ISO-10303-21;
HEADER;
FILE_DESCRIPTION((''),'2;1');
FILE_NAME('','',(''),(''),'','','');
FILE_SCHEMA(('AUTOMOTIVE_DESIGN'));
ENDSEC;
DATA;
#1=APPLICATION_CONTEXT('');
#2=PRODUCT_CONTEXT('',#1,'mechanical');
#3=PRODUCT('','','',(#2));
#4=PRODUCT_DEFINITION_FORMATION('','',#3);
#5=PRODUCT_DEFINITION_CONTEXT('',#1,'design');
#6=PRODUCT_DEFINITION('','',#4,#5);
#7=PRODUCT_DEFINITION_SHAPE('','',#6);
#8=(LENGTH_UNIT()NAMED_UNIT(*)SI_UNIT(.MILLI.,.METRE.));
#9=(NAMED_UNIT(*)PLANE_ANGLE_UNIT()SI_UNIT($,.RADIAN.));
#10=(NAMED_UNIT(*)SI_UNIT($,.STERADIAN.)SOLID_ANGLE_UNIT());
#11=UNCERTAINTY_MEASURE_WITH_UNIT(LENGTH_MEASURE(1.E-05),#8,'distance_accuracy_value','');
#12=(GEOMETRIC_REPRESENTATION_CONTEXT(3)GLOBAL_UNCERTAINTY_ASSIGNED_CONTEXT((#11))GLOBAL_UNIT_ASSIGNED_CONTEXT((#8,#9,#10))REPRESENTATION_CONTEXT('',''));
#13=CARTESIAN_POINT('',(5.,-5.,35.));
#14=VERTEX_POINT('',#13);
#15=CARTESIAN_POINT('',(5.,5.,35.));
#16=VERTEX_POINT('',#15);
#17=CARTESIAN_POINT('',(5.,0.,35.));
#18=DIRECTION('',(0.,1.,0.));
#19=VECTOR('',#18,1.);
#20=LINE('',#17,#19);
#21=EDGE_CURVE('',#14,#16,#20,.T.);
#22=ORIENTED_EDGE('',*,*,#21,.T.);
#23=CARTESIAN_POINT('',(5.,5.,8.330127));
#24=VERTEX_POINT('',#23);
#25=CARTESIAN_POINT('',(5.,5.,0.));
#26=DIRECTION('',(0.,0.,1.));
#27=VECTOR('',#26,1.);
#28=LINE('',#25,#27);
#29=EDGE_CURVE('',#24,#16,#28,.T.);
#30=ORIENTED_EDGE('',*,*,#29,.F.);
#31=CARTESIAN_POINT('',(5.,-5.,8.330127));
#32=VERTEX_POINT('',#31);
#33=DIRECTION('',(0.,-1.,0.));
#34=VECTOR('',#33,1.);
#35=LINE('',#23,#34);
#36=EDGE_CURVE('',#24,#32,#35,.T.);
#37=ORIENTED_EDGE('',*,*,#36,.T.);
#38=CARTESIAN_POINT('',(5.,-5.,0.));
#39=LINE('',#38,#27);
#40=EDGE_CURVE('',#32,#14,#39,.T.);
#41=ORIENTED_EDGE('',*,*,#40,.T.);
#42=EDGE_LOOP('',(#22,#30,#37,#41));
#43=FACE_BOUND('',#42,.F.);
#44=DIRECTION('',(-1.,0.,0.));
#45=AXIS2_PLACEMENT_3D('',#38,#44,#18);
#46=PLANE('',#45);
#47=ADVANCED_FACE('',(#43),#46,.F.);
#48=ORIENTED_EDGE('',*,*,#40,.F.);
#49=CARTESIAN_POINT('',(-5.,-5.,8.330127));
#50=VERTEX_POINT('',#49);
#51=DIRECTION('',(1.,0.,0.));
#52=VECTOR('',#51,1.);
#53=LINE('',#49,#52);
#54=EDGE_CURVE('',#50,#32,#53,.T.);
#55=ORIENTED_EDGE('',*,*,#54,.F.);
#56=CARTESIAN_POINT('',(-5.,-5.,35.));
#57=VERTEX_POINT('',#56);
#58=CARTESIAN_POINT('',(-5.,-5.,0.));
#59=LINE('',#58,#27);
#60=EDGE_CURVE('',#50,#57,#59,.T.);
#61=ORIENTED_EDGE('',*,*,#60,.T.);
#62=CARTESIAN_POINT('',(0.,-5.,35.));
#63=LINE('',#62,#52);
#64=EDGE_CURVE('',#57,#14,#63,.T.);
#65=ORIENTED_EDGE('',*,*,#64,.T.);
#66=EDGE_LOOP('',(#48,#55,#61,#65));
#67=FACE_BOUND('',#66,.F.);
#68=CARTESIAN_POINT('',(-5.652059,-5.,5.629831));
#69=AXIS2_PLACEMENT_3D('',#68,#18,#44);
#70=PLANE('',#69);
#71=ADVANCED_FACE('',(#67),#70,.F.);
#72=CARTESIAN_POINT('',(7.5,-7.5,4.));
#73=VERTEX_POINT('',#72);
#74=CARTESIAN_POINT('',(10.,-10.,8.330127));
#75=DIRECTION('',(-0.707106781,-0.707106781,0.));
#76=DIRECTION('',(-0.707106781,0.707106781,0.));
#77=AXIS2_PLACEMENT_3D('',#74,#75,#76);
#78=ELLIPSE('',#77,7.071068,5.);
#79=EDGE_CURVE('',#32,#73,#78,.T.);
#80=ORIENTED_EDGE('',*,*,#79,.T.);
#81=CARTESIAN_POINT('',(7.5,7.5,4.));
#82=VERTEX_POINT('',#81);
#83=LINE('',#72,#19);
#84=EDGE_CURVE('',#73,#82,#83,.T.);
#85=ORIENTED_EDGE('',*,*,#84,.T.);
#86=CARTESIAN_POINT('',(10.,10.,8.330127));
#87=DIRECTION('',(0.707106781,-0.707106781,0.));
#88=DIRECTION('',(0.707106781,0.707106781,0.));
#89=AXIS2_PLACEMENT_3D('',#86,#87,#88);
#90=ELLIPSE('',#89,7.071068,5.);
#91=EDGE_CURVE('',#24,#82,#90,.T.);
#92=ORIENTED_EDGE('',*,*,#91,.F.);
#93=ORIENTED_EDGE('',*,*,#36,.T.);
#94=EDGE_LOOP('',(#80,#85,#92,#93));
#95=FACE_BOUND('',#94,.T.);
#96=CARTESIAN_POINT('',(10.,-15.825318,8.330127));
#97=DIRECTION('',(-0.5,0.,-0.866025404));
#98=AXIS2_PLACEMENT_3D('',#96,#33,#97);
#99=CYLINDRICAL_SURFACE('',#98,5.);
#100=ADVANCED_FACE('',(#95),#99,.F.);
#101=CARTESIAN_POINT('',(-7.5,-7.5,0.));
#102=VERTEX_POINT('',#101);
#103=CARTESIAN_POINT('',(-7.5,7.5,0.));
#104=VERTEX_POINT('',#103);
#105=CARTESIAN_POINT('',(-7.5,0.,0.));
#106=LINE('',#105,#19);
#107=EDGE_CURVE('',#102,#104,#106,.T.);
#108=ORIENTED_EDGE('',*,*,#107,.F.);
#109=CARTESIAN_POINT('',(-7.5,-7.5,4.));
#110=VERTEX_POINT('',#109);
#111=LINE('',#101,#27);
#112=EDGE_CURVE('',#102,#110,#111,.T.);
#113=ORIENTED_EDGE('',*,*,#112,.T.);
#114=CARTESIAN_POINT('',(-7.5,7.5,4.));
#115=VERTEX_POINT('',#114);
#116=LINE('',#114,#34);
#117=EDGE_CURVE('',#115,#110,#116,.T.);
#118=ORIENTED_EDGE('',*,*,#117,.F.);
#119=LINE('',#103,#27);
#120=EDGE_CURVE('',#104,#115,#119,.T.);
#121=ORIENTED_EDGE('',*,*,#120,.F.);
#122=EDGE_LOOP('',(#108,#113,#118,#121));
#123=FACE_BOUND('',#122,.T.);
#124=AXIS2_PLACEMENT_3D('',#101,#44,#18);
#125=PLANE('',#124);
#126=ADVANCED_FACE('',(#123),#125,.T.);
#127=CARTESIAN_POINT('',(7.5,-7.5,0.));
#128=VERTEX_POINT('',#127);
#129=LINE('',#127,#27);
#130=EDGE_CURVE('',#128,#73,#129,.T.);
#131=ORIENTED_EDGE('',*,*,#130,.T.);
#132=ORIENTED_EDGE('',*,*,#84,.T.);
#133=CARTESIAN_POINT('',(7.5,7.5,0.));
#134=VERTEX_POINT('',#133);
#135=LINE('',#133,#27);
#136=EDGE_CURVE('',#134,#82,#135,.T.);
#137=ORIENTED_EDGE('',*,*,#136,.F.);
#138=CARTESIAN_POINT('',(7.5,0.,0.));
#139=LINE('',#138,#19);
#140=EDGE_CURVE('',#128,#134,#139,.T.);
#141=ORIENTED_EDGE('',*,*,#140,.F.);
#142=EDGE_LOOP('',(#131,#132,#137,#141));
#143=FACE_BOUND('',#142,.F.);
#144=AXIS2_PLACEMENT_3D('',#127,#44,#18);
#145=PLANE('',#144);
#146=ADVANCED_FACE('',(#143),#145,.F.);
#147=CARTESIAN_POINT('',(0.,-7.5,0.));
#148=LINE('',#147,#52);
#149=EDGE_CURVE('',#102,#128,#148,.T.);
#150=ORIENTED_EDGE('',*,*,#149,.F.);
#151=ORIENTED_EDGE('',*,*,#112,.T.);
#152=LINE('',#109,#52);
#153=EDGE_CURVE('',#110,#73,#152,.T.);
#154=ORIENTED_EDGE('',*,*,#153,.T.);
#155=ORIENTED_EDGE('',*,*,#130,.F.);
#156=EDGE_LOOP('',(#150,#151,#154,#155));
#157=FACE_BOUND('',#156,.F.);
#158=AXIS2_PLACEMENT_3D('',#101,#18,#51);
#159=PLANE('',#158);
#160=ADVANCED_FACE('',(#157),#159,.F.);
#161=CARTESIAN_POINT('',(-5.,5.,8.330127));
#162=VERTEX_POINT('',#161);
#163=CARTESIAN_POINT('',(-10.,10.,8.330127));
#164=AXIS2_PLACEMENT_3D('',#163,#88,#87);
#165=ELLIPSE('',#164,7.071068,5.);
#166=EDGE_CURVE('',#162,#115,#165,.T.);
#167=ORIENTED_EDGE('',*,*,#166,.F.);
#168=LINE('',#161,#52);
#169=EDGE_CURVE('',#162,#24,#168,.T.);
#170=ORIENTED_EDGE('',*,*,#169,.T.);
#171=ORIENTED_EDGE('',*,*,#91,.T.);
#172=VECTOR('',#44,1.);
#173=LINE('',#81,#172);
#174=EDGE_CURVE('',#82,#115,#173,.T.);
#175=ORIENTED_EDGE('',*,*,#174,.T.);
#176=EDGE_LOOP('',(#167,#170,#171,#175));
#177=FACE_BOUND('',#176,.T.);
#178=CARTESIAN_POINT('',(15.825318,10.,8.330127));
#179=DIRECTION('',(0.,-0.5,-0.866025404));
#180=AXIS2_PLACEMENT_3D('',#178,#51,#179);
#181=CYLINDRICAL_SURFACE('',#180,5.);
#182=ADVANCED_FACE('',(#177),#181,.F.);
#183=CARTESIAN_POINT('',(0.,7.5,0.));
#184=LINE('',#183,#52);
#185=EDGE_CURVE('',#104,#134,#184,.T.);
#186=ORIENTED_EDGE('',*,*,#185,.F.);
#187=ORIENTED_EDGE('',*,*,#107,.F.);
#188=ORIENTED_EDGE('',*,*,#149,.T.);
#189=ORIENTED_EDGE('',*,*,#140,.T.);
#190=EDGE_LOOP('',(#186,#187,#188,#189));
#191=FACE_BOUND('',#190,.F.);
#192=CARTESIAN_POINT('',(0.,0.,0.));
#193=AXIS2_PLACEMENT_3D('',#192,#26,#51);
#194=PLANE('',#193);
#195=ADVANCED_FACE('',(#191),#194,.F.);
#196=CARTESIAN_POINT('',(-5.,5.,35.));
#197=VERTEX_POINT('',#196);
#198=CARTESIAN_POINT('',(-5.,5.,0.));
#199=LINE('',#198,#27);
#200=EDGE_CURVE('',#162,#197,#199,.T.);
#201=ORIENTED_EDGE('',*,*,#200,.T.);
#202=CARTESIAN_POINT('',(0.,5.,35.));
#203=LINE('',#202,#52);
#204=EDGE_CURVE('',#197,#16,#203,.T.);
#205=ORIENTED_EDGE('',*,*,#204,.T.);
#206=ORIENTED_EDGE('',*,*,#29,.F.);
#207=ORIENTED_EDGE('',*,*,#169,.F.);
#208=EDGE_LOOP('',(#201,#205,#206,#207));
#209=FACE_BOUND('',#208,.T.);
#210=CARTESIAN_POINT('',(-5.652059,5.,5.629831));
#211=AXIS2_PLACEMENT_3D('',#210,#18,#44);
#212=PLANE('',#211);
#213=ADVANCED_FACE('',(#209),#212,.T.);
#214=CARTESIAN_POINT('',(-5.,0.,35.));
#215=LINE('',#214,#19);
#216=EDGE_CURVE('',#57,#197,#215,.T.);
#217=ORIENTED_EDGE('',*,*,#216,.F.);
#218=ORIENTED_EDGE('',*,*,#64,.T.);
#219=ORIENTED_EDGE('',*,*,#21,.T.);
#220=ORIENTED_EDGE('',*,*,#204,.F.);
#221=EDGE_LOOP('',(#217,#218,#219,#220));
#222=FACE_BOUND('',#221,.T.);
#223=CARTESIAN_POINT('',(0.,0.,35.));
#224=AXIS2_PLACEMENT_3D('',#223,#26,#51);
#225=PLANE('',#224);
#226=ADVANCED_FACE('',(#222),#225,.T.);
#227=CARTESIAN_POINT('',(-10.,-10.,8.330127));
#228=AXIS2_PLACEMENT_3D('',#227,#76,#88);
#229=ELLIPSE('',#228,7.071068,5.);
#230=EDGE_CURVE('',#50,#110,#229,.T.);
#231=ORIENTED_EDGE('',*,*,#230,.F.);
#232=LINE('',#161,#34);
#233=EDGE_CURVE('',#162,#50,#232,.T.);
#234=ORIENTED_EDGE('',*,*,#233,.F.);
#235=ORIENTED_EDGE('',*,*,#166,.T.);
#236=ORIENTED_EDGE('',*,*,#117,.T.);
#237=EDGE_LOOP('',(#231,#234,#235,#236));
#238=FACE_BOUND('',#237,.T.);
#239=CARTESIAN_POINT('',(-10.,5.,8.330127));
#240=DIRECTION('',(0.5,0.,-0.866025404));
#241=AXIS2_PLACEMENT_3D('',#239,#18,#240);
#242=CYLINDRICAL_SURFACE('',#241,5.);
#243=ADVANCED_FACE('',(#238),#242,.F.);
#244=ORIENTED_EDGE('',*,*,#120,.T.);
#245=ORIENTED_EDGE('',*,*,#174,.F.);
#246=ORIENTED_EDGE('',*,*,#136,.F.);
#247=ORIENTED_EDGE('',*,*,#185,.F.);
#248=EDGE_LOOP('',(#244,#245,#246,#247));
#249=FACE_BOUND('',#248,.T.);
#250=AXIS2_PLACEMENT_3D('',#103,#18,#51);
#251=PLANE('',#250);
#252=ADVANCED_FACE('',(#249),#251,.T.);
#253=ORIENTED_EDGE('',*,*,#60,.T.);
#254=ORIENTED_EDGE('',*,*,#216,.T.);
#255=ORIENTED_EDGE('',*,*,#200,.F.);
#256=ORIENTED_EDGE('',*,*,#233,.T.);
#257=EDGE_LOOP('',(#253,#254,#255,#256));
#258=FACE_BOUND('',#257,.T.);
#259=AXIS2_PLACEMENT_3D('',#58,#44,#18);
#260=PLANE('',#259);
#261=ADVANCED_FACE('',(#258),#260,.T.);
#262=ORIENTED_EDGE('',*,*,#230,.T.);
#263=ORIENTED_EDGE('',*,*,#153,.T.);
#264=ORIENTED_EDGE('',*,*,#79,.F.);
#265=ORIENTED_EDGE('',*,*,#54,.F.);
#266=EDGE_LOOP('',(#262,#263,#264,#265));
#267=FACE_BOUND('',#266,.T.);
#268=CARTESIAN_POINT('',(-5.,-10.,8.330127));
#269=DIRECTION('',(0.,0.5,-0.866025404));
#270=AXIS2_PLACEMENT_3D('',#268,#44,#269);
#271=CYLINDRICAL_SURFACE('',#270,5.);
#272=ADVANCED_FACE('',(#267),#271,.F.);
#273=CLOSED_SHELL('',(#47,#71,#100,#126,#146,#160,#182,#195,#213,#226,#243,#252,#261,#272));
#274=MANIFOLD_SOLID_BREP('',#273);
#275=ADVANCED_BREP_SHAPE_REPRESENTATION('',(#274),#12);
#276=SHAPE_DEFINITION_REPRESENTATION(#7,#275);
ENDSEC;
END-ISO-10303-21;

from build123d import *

# Parameters (mm, degrees)
F0_W         = 10
F0_H         = 10
F1_DEPTH     = 35
F2_W         = 15
F2_H         = 15
F3_DEPTH     = 4
F4_T1_DEPTH  = 10
F4_T3_DEPTH  = 10
F4_T9_DEPTH  = 20.8253175473
F4_T14_DEPTH = 20.8253175473
F4_T22_DEPTH = 20.8253175473
F4_T27_DEPTH = 20.8253175473
F4_T35_DEPTH = 20.8253175473
F4_T40_DEPTH = 20.8253175473
F4_T48_DEPTH = 20.8253175473
F4_T53_DEPTH = 20.8253175473


# Not quite as in the source:
# - a fillet or chamfer that OpenCascade refuses, or shapes differently, is made with other operations: its cross-section is extruded or revolved along the edge and cut away or added


with BuildPart() as f1:
    # F0 (on Top) → F1 (new body)
    with BuildSketch(Plane.XY):
        Rectangle(F0_W, F0_H)
    extrude(amount=F1_DEPTH)

    # F2 (on Top) → F3 (join)
    with BuildSketch(Plane.XY):
        Rectangle(F2_W, F2_H)
    extrude(amount=F3_DEPTH)

    # F4: fillet of radius 5 on 4 edges, made by hand

    # F4_s2 → F4_t1 (join)
    with BuildSketch(Plane.XZ.offset(-5)):
        with BuildLine():
            ThreePointArc((-7.5, 4), (-5.6698729811, 5.8301270189), (-5, 8.3301270189))
            Line((-5, 8.3301270189), (-5, 4))
            Line((-5, 4), (-7.5, 4))
        make_face()
        with BuildLine():
            ThreePointArc((7.5, 4), (5.6698729811, 5.8301270189), (5, 8.3301270189))
            Line((5, 8.3301270189), (5, 4))
            Line((5, 4), (7.5, 4))
        make_face()
    extrude(amount=F4_T1_DEPTH)

    # F4_s4 → F4_t3 (join)
    with BuildSketch(Plane.YZ.offset(-5)):
        with BuildLine():
            ThreePointArc((7.5, 4), (5.6698729811, 5.8301270189), (5, 8.3301270189))
            Line((5, 8.3301270189), (5, 4))
            Line((5, 4), (7.5, 4))
        make_face()
        with BuildLine():
            ThreePointArc((-7.5, 4), (-5.6698729811, 5.8301270189), (-5, 8.3301270189))
            Line((-5, 8.3301270189), (-5, 4))
            Line((-5, 4), (-7.5, 4))
        make_face()
    extrude(amount=F4_T3_DEPTH)


with BuildPart() as f4_tool7:
    # F4_s8 → F4_t9 (new body)
    with BuildSketch(Plane.YZ.offset(5)):
        with BuildLine():
            ThreePointArc((7.5, 4), (5.6698729811, 5.8301270189), (5, 8.3301270189))
            Line((5, 8.3301270189), (5, 4))
            Line((5, 4), (7.5, 4))
        make_face()
    extrude(amount=-F4_T9_DEPTH)

    split(bisect_by=Plane.YZ.offset(-7.5), keep=Keep.TOP)

    split(bisect_by=Plane.YZ.offset(-5), keep=Keep.BOTTOM)


with BuildPart() as f4_tool12:
    # F4_s13 → F4_t14 (new body)
    with BuildSketch(Plane.XZ.offset(-15.8253175473)):
        with BuildLine():
            ThreePointArc((-7.5, 4), (-5.6698729811, 5.8301270189), (-5, 8.3301270189))
            Line((-5, 8.3301270189), (-5, 4))
            Line((-5, 4), (-7.5, 4))
        make_face()
    extrude(amount=F4_T14_DEPTH)

    split(bisect_by=Plane.XZ.offset(-7.5), keep=Keep.TOP)

    split(bisect_by=Plane.XZ.offset(-5), keep=Keep.BOTTOM)


with BuildPart() as f4_tool7_1:
    add(f4_tool7.part)

    # F4_t17: intersect F4_tool12
    add(f4_tool12.part, mode=Mode.INTERSECT)


with BuildPart() as f1_1:
    add(f1.part)

    # F4_t5: union F4_tool7
    add(f4_tool7_1.part)


with BuildPart() as f4_tool20:
    # F4_s21 → F4_t22 (new body)
    with BuildSketch(Plane.XZ.offset(-5)):
        with BuildLine():
            ThreePointArc((-7.5, 4), (-5.6698729811, 5.8301270189), (-5, 8.3301270189))
            Line((-5, 8.3301270189), (-5, 4))
            Line((-5, 4), (-7.5, 4))
        make_face()
    extrude(amount=F4_T22_DEPTH)

    split(bisect_by=Plane.XZ.offset(7.5), keep=Keep.BOTTOM)

    split(bisect_by=Plane.XZ.offset(5), keep=Keep.TOP)


with BuildPart() as f4_tool25:
    # F4_s26 → F4_t27 (new body)
    with BuildSketch(Plane.YZ.offset(-15.8253175473)):
        with BuildLine():
            ThreePointArc((-7.5, 4), (-5.6698729811, 5.8301270189), (-5, 8.3301270189))
            Line((-5, 8.3301270189), (-5, 4))
            Line((-5, 4), (-7.5, 4))
        make_face()
    extrude(amount=F4_T27_DEPTH)

    split(bisect_by=Plane.YZ.offset(-7.5), keep=Keep.TOP)

    split(bisect_by=Plane.YZ.offset(-5), keep=Keep.BOTTOM)


with BuildPart() as f4_tool20_1:
    add(f4_tool20.part)

    # F4_t30: intersect F4_tool25
    add(f4_tool25.part, mode=Mode.INTERSECT)


with BuildPart() as f1_2:
    add(f1_1.part)

    # F4_t18: union F4_tool20
    add(f4_tool20_1.part)


with BuildPart() as f4_tool33:
    # F4_s34 → F4_t35 (new body)
    with BuildSketch(Plane.YZ.offset(15.8253175473)):
        with BuildLine():
            ThreePointArc((7.5, 4), (5.6698729811, 5.8301270189), (5, 8.3301270189))
            Line((5, 8.3301270189), (5, 4))
            Line((5, 4), (7.5, 4))
        make_face()
    extrude(amount=-F4_T35_DEPTH)

    split(bisect_by=Plane.YZ.offset(7.5), keep=Keep.BOTTOM)

    split(bisect_by=Plane.YZ.offset(5), keep=Keep.TOP)


with BuildPart() as f4_tool38:
    # F4_s39 → F4_t40 (new body)
    with BuildSketch(Plane.XZ.offset(5)):
        with BuildLine():
            ThreePointArc((7.5, 4), (5.6698729811, 5.8301270189), (5, 8.3301270189))
            Line((5, 8.3301270189), (5, 4))
            Line((5, 4), (7.5, 4))
        make_face()
    extrude(amount=-F4_T40_DEPTH)

    split(bisect_by=Plane.XZ.offset(-7.5), keep=Keep.TOP)

    split(bisect_by=Plane.XZ.offset(-5), keep=Keep.BOTTOM)


with BuildPart() as f4_tool33_1:
    add(f4_tool33.part)

    # F4_t43: intersect F4_tool38
    add(f4_tool38.part, mode=Mode.INTERSECT)


with BuildPart() as f1_3:
    add(f1_2.part)

    # F4_t31: union F4_tool33
    add(f4_tool33_1.part)


with BuildPart() as f4_tool46:
    # F4_s47 → F4_t48 (new body)
    with BuildSketch(Plane.YZ.offset(-5)):
        with BuildLine():
            ThreePointArc((-7.5, 4), (-5.6698729811, 5.8301270189), (-5, 8.3301270189))
            Line((-5, 8.3301270189), (-5, 4))
            Line((-5, 4), (-7.5, 4))
        make_face()
    extrude(amount=F4_T48_DEPTH)

    split(bisect_by=Plane.YZ.offset(7.5), keep=Keep.BOTTOM)

    split(bisect_by=Plane.YZ.offset(5), keep=Keep.TOP)


with BuildPart() as f4_tool51:
    # F4_s52 → F4_t53 (new body)
    with BuildSketch(Plane.XZ.offset(15.8253175473)):
        with BuildLine():
            ThreePointArc((7.5, 4), (5.6698729811, 5.8301270189), (5, 8.3301270189))
            Line((5, 8.3301270189), (5, 4))
            Line((5, 4), (7.5, 4))
        make_face()
    extrude(amount=-F4_T53_DEPTH)

    split(bisect_by=Plane.XZ.offset(7.5), keep=Keep.BOTTOM)

    split(bisect_by=Plane.XZ.offset(5), keep=Keep.TOP)


with BuildPart() as f4_tool46_1:
    add(f4_tool46.part)

    # F4_t56: intersect F4_tool51
    add(f4_tool51.part, mode=Mode.INTERSECT)


with BuildPart() as f1_4:
    add(f1_3.part)

    # F4_t44: union F4_tool46
    add(f4_tool46_1.part)


solid = f1_4.part
